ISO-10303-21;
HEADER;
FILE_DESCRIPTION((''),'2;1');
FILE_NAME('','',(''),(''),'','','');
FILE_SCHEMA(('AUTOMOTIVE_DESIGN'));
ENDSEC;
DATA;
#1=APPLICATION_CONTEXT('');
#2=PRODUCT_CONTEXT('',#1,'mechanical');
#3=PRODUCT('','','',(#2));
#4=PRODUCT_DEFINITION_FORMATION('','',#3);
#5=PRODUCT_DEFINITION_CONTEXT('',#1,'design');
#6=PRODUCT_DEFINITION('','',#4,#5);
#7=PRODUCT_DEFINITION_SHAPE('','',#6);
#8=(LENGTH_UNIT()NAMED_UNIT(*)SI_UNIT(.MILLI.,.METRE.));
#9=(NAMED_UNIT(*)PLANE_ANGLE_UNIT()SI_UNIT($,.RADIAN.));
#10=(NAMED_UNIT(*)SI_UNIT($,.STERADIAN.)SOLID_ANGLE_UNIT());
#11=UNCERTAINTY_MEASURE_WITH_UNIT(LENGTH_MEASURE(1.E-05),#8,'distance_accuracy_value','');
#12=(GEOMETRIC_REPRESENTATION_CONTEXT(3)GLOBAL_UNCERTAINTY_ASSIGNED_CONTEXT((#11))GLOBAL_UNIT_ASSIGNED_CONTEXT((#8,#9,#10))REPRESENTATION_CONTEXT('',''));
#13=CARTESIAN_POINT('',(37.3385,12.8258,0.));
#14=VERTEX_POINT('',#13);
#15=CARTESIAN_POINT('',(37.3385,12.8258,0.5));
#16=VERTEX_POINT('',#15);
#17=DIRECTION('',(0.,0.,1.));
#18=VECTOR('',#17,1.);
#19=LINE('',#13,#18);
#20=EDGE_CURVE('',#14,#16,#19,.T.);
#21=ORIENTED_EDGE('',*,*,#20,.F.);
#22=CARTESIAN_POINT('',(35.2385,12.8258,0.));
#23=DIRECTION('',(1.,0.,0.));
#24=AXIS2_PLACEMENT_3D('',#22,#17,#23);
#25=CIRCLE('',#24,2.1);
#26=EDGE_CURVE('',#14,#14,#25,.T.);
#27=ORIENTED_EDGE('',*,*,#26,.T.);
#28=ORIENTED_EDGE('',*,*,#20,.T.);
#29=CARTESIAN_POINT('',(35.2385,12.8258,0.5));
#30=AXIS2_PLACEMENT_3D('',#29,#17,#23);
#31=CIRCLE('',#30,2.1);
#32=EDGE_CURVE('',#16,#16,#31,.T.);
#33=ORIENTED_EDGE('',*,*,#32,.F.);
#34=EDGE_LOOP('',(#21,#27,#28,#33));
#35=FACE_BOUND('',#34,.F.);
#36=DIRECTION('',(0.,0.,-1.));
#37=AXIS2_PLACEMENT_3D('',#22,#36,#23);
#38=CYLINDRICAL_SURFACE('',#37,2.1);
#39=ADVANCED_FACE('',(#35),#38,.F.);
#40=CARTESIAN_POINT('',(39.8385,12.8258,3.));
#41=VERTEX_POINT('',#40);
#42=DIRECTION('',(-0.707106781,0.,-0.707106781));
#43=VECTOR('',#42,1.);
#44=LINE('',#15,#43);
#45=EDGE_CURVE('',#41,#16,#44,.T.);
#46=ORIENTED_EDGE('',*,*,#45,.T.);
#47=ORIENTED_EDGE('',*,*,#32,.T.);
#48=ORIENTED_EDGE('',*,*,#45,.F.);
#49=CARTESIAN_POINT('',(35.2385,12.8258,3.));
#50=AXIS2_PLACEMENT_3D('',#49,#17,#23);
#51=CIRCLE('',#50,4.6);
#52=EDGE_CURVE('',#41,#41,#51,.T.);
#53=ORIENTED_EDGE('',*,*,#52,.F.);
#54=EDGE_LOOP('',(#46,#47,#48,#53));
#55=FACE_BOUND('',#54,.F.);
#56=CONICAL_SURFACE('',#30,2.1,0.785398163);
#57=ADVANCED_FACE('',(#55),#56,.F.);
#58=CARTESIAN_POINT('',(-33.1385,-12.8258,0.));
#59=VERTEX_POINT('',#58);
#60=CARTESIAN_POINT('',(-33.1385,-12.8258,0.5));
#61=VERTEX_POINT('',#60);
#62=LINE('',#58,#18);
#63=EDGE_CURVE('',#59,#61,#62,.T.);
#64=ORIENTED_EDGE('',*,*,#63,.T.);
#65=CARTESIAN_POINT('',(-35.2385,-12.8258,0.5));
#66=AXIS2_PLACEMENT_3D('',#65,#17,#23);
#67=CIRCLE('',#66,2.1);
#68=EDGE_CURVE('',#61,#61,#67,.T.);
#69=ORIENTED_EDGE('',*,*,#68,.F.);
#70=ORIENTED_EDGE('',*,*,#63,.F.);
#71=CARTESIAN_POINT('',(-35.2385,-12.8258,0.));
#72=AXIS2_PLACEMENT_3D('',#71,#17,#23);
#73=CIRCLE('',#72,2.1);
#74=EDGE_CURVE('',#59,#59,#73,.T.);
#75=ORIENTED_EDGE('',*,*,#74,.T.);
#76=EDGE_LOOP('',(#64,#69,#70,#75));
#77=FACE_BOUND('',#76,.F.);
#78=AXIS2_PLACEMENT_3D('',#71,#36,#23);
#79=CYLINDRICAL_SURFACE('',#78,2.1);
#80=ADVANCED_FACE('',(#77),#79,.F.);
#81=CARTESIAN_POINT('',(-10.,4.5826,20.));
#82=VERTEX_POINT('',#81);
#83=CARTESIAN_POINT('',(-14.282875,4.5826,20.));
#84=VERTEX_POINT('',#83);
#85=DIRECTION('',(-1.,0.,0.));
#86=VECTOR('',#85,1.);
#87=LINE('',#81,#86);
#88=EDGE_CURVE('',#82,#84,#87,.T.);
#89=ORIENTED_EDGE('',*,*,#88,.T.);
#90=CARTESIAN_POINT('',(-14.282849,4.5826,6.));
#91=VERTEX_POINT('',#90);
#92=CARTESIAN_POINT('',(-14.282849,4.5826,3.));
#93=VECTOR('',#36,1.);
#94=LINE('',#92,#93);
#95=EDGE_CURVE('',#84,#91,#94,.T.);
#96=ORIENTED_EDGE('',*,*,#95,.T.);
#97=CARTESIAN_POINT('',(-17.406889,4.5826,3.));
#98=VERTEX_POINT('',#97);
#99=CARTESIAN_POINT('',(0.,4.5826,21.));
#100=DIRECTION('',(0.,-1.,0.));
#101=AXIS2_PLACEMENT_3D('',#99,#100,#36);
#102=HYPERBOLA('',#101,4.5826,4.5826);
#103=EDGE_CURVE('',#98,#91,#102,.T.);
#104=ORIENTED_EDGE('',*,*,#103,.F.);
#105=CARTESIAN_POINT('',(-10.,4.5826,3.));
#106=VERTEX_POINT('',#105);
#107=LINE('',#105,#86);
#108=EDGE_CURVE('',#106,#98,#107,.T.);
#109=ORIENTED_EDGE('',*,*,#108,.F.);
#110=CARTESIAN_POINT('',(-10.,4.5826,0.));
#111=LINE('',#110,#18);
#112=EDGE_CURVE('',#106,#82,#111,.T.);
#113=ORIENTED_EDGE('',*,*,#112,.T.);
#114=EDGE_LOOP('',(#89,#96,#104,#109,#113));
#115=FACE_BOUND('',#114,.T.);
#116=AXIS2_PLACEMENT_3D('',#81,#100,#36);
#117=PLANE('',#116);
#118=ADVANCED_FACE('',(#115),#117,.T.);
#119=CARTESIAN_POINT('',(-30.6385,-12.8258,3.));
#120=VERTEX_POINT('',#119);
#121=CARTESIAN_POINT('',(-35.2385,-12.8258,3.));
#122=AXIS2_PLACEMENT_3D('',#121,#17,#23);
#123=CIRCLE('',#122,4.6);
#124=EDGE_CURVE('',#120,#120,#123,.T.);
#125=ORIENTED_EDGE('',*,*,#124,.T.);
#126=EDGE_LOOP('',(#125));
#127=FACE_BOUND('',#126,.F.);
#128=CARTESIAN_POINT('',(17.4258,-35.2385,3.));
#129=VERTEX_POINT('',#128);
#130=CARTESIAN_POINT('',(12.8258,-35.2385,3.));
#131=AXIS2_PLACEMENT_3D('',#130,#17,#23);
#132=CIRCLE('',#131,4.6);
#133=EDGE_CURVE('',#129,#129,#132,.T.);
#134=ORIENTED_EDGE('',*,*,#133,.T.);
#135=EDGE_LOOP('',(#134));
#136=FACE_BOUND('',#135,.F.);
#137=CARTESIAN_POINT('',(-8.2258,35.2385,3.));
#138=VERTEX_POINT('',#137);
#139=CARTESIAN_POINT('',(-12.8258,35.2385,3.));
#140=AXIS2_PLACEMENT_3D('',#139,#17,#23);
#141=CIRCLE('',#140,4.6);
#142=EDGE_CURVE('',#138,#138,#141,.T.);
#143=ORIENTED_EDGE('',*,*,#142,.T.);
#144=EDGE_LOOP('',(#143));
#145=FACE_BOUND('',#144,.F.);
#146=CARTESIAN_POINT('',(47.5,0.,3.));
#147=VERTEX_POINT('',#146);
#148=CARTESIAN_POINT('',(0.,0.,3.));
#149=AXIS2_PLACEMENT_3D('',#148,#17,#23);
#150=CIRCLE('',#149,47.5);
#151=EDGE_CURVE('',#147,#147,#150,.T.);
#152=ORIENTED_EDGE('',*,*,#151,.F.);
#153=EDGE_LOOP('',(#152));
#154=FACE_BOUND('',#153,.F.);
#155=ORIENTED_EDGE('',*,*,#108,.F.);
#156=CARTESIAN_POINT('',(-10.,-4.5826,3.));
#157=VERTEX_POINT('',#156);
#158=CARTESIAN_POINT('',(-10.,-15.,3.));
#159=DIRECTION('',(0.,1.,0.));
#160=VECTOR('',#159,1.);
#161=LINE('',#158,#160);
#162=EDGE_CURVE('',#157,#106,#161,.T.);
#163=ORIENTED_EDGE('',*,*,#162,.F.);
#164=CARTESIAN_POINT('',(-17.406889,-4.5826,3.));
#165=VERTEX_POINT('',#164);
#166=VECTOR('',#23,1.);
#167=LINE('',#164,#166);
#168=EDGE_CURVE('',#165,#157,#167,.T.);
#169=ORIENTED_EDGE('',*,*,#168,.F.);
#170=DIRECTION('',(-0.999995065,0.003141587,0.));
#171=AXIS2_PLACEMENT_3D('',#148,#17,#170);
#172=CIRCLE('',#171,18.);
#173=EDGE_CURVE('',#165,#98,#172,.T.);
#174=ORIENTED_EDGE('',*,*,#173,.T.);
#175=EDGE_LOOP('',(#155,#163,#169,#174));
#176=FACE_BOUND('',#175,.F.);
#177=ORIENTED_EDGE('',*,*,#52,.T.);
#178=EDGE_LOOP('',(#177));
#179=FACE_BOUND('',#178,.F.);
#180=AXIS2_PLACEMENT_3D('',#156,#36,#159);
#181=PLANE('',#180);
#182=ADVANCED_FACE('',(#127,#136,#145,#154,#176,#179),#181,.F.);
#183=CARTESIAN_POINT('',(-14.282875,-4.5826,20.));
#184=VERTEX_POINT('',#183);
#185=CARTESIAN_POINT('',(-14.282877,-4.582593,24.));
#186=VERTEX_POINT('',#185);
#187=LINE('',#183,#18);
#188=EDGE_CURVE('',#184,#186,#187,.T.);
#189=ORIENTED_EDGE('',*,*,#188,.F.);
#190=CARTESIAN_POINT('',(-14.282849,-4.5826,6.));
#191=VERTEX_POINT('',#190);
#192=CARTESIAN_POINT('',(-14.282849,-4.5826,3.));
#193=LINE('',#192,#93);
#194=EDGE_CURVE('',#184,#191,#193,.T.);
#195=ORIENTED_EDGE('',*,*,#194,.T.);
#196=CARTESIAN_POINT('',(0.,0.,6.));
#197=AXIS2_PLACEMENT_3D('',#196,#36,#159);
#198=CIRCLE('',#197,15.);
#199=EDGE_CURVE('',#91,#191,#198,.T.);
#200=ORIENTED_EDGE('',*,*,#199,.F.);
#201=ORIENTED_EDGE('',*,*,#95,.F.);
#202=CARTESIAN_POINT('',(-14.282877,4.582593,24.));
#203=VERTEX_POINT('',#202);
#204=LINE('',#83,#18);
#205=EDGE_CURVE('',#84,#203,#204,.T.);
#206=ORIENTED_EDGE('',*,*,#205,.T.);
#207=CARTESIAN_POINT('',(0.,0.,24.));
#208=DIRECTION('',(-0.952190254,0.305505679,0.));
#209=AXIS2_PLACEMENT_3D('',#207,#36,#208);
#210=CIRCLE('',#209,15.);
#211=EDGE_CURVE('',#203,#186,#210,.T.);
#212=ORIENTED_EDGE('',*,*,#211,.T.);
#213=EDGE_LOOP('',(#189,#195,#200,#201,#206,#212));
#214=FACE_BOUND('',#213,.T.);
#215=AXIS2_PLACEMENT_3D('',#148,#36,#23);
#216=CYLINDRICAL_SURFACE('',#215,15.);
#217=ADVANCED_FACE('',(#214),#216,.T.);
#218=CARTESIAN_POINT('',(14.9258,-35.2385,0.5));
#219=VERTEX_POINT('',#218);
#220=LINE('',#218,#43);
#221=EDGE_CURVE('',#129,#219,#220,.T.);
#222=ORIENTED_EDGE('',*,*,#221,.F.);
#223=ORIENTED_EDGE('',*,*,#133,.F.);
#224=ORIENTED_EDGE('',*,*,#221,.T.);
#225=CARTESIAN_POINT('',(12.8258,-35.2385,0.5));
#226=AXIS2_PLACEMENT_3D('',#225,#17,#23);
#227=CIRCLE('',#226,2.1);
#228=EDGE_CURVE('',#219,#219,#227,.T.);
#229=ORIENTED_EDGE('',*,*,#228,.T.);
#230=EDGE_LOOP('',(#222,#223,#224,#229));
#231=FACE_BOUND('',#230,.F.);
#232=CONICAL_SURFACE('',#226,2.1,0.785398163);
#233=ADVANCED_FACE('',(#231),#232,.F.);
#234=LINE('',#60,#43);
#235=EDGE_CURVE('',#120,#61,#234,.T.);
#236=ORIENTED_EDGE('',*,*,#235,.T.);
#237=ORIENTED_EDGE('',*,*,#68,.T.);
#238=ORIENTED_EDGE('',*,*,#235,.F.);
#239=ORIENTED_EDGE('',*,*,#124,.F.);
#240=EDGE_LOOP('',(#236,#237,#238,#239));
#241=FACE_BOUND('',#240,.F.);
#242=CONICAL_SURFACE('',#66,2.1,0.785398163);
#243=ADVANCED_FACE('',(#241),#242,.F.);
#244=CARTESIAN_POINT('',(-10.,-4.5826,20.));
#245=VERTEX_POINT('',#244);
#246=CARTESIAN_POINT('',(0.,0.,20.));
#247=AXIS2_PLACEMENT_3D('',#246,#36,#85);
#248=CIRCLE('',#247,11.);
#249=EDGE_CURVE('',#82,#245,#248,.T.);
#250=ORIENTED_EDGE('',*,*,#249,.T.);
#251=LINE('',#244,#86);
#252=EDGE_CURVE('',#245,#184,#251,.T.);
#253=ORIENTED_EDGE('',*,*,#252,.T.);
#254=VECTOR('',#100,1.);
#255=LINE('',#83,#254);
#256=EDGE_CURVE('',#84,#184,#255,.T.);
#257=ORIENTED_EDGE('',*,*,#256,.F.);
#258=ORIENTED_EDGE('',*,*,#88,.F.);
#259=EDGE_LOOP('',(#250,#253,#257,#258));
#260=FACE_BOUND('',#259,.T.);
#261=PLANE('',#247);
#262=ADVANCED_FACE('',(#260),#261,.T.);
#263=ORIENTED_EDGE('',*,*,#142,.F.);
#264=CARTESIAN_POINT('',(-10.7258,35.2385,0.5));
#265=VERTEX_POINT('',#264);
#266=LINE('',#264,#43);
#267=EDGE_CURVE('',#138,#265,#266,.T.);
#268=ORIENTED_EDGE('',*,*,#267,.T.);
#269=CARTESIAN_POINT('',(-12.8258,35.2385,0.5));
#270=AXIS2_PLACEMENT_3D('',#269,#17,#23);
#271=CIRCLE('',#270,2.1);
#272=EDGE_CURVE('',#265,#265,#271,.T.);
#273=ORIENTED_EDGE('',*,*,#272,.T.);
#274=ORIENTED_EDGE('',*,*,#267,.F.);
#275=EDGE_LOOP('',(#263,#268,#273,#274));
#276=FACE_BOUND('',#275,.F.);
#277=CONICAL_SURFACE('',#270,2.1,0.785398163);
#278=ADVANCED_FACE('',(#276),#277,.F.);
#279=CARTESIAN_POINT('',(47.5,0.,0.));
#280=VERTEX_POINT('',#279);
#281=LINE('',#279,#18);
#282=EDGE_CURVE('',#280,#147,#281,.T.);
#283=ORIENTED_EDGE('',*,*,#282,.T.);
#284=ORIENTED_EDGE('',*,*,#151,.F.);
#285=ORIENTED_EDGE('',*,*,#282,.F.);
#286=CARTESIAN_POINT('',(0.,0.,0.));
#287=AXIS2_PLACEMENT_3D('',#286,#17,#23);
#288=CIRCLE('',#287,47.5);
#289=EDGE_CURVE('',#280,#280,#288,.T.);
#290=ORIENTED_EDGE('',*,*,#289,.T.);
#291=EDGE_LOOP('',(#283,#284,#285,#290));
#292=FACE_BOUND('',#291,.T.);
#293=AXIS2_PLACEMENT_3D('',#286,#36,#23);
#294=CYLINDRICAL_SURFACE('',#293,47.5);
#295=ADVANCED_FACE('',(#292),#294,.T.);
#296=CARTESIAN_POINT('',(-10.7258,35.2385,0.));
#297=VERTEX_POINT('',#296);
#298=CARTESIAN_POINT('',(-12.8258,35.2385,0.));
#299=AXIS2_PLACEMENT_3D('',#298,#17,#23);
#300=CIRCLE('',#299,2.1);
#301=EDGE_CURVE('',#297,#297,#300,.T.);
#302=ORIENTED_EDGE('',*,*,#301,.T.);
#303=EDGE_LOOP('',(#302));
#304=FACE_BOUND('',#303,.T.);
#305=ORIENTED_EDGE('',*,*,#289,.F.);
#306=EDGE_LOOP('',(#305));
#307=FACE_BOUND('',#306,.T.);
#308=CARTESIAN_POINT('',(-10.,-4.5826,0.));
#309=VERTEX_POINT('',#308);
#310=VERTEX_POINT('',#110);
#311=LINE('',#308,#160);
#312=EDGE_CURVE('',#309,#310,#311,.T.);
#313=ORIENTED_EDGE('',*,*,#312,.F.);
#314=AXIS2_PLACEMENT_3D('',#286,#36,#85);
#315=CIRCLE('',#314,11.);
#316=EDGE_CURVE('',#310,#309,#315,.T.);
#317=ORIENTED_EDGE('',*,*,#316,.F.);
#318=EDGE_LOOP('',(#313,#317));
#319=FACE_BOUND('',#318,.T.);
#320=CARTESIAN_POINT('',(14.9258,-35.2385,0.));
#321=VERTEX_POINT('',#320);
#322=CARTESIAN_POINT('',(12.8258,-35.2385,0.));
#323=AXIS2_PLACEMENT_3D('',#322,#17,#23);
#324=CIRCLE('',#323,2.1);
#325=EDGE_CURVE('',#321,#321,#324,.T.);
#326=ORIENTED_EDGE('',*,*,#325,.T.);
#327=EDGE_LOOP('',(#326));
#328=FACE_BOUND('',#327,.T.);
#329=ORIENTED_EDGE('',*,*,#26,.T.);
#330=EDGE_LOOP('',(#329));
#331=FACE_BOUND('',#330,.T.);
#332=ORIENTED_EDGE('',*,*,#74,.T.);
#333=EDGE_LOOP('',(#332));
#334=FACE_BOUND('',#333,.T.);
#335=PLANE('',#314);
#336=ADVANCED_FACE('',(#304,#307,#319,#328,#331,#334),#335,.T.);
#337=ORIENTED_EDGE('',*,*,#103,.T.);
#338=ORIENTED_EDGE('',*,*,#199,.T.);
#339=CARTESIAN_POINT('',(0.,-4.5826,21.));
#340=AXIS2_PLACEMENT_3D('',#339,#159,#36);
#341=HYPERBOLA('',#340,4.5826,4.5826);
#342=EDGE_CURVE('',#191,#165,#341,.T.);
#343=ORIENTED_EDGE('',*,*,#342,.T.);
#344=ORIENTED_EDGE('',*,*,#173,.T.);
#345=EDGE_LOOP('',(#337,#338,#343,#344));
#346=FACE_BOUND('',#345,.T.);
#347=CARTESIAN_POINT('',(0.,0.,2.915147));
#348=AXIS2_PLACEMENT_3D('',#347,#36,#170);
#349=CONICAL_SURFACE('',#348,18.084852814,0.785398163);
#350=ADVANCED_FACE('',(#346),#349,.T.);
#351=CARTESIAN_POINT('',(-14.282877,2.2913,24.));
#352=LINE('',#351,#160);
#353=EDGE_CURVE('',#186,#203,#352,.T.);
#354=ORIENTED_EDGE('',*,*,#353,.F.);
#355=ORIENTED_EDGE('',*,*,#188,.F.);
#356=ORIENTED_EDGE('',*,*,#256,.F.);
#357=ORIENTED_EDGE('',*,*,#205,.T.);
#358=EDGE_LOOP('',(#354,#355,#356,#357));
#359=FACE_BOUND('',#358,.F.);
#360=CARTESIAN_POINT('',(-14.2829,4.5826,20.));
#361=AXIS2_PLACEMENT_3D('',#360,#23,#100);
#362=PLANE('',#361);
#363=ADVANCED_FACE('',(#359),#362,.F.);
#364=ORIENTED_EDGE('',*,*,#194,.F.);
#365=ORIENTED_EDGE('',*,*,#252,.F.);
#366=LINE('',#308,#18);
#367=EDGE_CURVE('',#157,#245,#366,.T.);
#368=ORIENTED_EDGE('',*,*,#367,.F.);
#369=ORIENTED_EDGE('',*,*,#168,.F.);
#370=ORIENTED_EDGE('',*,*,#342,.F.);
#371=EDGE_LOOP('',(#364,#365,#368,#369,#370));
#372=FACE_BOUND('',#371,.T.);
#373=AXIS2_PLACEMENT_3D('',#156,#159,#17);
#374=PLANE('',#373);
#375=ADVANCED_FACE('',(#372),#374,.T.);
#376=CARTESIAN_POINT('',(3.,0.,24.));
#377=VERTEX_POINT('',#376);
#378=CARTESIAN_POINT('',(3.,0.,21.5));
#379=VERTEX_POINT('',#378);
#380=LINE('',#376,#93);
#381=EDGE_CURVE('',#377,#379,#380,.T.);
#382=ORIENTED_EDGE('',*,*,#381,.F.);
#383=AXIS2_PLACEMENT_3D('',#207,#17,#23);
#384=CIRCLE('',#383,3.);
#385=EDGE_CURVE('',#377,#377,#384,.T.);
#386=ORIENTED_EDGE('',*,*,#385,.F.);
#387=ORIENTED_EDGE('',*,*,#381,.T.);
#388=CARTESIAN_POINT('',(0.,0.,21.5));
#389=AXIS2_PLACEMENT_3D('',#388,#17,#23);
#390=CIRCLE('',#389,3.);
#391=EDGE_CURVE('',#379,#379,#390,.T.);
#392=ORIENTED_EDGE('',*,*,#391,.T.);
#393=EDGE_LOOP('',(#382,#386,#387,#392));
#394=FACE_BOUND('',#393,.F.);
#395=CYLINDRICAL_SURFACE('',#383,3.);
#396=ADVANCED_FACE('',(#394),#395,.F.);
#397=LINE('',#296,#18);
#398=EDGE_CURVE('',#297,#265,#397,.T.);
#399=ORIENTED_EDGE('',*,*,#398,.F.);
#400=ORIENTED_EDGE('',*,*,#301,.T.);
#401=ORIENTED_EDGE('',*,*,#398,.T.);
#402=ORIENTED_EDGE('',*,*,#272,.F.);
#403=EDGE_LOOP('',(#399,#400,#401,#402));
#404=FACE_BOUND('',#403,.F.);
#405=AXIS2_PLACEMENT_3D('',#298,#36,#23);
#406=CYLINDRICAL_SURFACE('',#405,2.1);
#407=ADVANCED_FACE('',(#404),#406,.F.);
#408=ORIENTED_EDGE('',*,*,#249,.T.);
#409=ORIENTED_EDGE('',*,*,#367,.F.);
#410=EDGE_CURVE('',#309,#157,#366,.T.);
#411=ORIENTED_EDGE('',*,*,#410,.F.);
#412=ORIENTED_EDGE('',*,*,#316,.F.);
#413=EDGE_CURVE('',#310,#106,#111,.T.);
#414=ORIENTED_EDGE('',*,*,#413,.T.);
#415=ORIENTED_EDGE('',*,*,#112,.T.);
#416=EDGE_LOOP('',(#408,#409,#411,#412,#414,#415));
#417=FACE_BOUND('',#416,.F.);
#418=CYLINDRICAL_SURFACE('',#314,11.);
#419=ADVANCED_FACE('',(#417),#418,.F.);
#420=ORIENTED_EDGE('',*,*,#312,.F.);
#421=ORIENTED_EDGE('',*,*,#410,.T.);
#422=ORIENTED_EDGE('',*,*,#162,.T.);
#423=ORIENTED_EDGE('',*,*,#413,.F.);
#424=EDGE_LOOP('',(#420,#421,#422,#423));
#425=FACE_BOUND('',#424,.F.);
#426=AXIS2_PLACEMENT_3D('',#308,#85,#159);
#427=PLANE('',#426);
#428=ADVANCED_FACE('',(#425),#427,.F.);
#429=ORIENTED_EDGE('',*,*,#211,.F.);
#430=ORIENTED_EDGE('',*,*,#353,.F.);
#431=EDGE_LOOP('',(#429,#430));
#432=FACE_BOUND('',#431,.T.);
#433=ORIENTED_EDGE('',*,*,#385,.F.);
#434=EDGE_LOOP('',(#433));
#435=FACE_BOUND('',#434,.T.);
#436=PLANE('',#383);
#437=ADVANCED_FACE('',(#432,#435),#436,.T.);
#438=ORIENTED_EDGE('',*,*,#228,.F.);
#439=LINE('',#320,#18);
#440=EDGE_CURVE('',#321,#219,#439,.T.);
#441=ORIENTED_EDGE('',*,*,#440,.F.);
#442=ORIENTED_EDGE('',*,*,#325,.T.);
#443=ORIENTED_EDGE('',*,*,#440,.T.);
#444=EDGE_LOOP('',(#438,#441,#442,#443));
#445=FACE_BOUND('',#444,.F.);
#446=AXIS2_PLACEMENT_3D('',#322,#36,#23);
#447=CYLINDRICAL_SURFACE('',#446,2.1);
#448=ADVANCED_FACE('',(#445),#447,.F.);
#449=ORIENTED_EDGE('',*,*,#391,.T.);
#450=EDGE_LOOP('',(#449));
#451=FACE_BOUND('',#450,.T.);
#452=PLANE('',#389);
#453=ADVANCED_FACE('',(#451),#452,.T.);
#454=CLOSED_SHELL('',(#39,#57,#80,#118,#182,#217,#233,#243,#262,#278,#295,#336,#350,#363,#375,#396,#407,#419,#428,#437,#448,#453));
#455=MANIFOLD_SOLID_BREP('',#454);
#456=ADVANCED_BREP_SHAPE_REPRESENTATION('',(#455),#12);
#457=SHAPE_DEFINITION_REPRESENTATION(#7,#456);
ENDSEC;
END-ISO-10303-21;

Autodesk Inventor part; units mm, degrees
ref_plane "YZ Plane" through (0, 0, 0) normal (1, 0, 0) x (0, 1, 0)
ref_plane "XZ Plane" through (0, 0, 0) normal (0, 1, 0) x (-1, 0, 0)
ref_plane "XY Plane" through (0, 0, 0) normal (0, 0, 1) x (1, 0, 0)
sketch "Skizze1" plane through (0, 0, 0) normal (0, 0, 1) x (1, 0, 0)
  circle A0 centre (-35.2385, -12.8258) radius 2.1 projected
  circle A1 centre (-12.8258, 35.2385) radius 2.1 projected
  circle A2 centre (12.8258, -35.2385) radius 2.1 projected
  circle A3 centre (35.2385, 12.8258) radius 2.1 projected
  circle A4 centre (0, 0) radius 25 projected
  circle A5 centre (0, 0) radius 45 projected
  circle A6 centre (0, 0) radius 47.5 projected
  circle A7 centre (0, 0) radius 8.4675
  point P0 (0, 0)
extrude "Extrusion1" add sketch "Skizze1" along normal blind 3 contours A4 | A5 | A6 | A7
sketch "Skizze2" plane through (0, 0, 3) normal (0, 0, 1) x (1, 0, 0)
  circle A0 centre (0, 0) radius 15
  dimension "d2" = 30
extrude "Extrusion2" add sketch "Skizze2" along normal blind 21
sketch "Skizze3" plane through (0, 0, 24) normal (0, 0, 1) x (1, 0, 0)
  circle A0 centre (0, 0) radius 3
  dimension "d7" = 6
extrude "Extrusion3" cut sketch "Skizze3" against normal blind 2.5
sketch "Skizze4" plane through (0, 0, 0) normal (0, 0, -1) x (-1, 0, 0)
  circle A0 centre (0, 0) radius 15 projected
  circle A1 centre (0, 0) radius 11
  dimension "d8" = 4
extrude "Extrusion4" cut sketch "Skizze4" against normal blind 20 contours A1
sketch "Skizze5" plane through (0, 0, 0) normal (0, 0, -1) x (-1, 0, 0)
  circle A0 centre (0, 0) radius 11 projected
  circle A1 centre (-35.2385, 12.8258) radius 2.1 projected
  circle A2 centre (-12.8258, -35.2385) radius 2.1 projected
  circle A3 centre (12.8258, 35.2385) radius 2.1 projected
  circle A4 centre (35.2385, -12.8258) radius 2.1 projected
  circle A5 centre (0, 0) radius 47.5 projected
  line L0 (10, -4.5826) -> (10, 4.5826)
  dimension "d11" = 10
extrude "Extrusion5" add sketch "Skizze5" against normal up to surface (20 mm away) contours A0 L0 picked at (10.1839, -1.0361)
sketch "Skizze6" plane through (-10, -4.5826, 0) normal (1, 0, 0) x (0, 0, -1)
  line L0 (-20, 0) -> (-20, 9.1652) projected
  line L1 (0, 0) -> (-20, 0) projected
  line L2 (0, 9.1652) -> (0, 0) projected
  line L3 (-20, 9.1652) -> (0, 9.1652) projected
  line L4 (-3, -10.4174) -> (-3, 19.5826) projected
  line L5 (-3, 15.3083) -> (-3, 19.5083) projected
  line L6 (-3, -32.7559) -> (-3, -28.5559) projected
  line L7 (-3, 37.721) -> (-3, 41.921) projected
  line L8 (-3, -10.3432) -> (-3, -6.1432) projected
  line L9 (-3, 52.0826) -> (-3, -42.9174) projected
  line L10 (-3, 0) -> (-20, 0)
  line L11 (-20, 0) -> (-20, 9.1652)
  line L12 (-20, 9.1652) -> (-3, 9.1652)
  line L13 (-3, 9.1652) -> (-3, 0)
  point P0 (0, 4.5826)
extrude "Extrusion6" cut sketch "Skizze6" against normal blind 20 contours L0 L3 L4 L1
sketch "Skizze7" plane through (0, 0, 20) normal (0, 0, -1) x (-1, 0, 0)
  arc A0 (10, 4.5826) -> (10, -4.5826) centre (0, 0) ccw projected
  line L0 (10, -4.5826) -> (14.2829, -4.5826) projected
  arc A1 (14.2829, -4.5826) -> (14.2829, 4.5826) centre (0, 0) ccw projected
  line L1 (10, 4.5826) -> (14.2829, 4.5826) projected
  line L2 (14.2829, 4.5826) -> (14.2829, -4.5826)
extrude "Extrusion7" cut sketch "Skizze7" against normal blind 20 contours A1 L2
chamfer "Fase1" distance 3 angle 45 1 edges at (15, 0, 3)
chamfer "Fase2" distance 2.5 angle 45 4 edges at (-14.9258, 35.2385, 3) (33.1385, 12.8258, 3) (10.7258, -35.2385, 3) (-37.3385, -12.8258, 3)
properties part number "OberArmMagnet" material "ABS-Kunststoff"
